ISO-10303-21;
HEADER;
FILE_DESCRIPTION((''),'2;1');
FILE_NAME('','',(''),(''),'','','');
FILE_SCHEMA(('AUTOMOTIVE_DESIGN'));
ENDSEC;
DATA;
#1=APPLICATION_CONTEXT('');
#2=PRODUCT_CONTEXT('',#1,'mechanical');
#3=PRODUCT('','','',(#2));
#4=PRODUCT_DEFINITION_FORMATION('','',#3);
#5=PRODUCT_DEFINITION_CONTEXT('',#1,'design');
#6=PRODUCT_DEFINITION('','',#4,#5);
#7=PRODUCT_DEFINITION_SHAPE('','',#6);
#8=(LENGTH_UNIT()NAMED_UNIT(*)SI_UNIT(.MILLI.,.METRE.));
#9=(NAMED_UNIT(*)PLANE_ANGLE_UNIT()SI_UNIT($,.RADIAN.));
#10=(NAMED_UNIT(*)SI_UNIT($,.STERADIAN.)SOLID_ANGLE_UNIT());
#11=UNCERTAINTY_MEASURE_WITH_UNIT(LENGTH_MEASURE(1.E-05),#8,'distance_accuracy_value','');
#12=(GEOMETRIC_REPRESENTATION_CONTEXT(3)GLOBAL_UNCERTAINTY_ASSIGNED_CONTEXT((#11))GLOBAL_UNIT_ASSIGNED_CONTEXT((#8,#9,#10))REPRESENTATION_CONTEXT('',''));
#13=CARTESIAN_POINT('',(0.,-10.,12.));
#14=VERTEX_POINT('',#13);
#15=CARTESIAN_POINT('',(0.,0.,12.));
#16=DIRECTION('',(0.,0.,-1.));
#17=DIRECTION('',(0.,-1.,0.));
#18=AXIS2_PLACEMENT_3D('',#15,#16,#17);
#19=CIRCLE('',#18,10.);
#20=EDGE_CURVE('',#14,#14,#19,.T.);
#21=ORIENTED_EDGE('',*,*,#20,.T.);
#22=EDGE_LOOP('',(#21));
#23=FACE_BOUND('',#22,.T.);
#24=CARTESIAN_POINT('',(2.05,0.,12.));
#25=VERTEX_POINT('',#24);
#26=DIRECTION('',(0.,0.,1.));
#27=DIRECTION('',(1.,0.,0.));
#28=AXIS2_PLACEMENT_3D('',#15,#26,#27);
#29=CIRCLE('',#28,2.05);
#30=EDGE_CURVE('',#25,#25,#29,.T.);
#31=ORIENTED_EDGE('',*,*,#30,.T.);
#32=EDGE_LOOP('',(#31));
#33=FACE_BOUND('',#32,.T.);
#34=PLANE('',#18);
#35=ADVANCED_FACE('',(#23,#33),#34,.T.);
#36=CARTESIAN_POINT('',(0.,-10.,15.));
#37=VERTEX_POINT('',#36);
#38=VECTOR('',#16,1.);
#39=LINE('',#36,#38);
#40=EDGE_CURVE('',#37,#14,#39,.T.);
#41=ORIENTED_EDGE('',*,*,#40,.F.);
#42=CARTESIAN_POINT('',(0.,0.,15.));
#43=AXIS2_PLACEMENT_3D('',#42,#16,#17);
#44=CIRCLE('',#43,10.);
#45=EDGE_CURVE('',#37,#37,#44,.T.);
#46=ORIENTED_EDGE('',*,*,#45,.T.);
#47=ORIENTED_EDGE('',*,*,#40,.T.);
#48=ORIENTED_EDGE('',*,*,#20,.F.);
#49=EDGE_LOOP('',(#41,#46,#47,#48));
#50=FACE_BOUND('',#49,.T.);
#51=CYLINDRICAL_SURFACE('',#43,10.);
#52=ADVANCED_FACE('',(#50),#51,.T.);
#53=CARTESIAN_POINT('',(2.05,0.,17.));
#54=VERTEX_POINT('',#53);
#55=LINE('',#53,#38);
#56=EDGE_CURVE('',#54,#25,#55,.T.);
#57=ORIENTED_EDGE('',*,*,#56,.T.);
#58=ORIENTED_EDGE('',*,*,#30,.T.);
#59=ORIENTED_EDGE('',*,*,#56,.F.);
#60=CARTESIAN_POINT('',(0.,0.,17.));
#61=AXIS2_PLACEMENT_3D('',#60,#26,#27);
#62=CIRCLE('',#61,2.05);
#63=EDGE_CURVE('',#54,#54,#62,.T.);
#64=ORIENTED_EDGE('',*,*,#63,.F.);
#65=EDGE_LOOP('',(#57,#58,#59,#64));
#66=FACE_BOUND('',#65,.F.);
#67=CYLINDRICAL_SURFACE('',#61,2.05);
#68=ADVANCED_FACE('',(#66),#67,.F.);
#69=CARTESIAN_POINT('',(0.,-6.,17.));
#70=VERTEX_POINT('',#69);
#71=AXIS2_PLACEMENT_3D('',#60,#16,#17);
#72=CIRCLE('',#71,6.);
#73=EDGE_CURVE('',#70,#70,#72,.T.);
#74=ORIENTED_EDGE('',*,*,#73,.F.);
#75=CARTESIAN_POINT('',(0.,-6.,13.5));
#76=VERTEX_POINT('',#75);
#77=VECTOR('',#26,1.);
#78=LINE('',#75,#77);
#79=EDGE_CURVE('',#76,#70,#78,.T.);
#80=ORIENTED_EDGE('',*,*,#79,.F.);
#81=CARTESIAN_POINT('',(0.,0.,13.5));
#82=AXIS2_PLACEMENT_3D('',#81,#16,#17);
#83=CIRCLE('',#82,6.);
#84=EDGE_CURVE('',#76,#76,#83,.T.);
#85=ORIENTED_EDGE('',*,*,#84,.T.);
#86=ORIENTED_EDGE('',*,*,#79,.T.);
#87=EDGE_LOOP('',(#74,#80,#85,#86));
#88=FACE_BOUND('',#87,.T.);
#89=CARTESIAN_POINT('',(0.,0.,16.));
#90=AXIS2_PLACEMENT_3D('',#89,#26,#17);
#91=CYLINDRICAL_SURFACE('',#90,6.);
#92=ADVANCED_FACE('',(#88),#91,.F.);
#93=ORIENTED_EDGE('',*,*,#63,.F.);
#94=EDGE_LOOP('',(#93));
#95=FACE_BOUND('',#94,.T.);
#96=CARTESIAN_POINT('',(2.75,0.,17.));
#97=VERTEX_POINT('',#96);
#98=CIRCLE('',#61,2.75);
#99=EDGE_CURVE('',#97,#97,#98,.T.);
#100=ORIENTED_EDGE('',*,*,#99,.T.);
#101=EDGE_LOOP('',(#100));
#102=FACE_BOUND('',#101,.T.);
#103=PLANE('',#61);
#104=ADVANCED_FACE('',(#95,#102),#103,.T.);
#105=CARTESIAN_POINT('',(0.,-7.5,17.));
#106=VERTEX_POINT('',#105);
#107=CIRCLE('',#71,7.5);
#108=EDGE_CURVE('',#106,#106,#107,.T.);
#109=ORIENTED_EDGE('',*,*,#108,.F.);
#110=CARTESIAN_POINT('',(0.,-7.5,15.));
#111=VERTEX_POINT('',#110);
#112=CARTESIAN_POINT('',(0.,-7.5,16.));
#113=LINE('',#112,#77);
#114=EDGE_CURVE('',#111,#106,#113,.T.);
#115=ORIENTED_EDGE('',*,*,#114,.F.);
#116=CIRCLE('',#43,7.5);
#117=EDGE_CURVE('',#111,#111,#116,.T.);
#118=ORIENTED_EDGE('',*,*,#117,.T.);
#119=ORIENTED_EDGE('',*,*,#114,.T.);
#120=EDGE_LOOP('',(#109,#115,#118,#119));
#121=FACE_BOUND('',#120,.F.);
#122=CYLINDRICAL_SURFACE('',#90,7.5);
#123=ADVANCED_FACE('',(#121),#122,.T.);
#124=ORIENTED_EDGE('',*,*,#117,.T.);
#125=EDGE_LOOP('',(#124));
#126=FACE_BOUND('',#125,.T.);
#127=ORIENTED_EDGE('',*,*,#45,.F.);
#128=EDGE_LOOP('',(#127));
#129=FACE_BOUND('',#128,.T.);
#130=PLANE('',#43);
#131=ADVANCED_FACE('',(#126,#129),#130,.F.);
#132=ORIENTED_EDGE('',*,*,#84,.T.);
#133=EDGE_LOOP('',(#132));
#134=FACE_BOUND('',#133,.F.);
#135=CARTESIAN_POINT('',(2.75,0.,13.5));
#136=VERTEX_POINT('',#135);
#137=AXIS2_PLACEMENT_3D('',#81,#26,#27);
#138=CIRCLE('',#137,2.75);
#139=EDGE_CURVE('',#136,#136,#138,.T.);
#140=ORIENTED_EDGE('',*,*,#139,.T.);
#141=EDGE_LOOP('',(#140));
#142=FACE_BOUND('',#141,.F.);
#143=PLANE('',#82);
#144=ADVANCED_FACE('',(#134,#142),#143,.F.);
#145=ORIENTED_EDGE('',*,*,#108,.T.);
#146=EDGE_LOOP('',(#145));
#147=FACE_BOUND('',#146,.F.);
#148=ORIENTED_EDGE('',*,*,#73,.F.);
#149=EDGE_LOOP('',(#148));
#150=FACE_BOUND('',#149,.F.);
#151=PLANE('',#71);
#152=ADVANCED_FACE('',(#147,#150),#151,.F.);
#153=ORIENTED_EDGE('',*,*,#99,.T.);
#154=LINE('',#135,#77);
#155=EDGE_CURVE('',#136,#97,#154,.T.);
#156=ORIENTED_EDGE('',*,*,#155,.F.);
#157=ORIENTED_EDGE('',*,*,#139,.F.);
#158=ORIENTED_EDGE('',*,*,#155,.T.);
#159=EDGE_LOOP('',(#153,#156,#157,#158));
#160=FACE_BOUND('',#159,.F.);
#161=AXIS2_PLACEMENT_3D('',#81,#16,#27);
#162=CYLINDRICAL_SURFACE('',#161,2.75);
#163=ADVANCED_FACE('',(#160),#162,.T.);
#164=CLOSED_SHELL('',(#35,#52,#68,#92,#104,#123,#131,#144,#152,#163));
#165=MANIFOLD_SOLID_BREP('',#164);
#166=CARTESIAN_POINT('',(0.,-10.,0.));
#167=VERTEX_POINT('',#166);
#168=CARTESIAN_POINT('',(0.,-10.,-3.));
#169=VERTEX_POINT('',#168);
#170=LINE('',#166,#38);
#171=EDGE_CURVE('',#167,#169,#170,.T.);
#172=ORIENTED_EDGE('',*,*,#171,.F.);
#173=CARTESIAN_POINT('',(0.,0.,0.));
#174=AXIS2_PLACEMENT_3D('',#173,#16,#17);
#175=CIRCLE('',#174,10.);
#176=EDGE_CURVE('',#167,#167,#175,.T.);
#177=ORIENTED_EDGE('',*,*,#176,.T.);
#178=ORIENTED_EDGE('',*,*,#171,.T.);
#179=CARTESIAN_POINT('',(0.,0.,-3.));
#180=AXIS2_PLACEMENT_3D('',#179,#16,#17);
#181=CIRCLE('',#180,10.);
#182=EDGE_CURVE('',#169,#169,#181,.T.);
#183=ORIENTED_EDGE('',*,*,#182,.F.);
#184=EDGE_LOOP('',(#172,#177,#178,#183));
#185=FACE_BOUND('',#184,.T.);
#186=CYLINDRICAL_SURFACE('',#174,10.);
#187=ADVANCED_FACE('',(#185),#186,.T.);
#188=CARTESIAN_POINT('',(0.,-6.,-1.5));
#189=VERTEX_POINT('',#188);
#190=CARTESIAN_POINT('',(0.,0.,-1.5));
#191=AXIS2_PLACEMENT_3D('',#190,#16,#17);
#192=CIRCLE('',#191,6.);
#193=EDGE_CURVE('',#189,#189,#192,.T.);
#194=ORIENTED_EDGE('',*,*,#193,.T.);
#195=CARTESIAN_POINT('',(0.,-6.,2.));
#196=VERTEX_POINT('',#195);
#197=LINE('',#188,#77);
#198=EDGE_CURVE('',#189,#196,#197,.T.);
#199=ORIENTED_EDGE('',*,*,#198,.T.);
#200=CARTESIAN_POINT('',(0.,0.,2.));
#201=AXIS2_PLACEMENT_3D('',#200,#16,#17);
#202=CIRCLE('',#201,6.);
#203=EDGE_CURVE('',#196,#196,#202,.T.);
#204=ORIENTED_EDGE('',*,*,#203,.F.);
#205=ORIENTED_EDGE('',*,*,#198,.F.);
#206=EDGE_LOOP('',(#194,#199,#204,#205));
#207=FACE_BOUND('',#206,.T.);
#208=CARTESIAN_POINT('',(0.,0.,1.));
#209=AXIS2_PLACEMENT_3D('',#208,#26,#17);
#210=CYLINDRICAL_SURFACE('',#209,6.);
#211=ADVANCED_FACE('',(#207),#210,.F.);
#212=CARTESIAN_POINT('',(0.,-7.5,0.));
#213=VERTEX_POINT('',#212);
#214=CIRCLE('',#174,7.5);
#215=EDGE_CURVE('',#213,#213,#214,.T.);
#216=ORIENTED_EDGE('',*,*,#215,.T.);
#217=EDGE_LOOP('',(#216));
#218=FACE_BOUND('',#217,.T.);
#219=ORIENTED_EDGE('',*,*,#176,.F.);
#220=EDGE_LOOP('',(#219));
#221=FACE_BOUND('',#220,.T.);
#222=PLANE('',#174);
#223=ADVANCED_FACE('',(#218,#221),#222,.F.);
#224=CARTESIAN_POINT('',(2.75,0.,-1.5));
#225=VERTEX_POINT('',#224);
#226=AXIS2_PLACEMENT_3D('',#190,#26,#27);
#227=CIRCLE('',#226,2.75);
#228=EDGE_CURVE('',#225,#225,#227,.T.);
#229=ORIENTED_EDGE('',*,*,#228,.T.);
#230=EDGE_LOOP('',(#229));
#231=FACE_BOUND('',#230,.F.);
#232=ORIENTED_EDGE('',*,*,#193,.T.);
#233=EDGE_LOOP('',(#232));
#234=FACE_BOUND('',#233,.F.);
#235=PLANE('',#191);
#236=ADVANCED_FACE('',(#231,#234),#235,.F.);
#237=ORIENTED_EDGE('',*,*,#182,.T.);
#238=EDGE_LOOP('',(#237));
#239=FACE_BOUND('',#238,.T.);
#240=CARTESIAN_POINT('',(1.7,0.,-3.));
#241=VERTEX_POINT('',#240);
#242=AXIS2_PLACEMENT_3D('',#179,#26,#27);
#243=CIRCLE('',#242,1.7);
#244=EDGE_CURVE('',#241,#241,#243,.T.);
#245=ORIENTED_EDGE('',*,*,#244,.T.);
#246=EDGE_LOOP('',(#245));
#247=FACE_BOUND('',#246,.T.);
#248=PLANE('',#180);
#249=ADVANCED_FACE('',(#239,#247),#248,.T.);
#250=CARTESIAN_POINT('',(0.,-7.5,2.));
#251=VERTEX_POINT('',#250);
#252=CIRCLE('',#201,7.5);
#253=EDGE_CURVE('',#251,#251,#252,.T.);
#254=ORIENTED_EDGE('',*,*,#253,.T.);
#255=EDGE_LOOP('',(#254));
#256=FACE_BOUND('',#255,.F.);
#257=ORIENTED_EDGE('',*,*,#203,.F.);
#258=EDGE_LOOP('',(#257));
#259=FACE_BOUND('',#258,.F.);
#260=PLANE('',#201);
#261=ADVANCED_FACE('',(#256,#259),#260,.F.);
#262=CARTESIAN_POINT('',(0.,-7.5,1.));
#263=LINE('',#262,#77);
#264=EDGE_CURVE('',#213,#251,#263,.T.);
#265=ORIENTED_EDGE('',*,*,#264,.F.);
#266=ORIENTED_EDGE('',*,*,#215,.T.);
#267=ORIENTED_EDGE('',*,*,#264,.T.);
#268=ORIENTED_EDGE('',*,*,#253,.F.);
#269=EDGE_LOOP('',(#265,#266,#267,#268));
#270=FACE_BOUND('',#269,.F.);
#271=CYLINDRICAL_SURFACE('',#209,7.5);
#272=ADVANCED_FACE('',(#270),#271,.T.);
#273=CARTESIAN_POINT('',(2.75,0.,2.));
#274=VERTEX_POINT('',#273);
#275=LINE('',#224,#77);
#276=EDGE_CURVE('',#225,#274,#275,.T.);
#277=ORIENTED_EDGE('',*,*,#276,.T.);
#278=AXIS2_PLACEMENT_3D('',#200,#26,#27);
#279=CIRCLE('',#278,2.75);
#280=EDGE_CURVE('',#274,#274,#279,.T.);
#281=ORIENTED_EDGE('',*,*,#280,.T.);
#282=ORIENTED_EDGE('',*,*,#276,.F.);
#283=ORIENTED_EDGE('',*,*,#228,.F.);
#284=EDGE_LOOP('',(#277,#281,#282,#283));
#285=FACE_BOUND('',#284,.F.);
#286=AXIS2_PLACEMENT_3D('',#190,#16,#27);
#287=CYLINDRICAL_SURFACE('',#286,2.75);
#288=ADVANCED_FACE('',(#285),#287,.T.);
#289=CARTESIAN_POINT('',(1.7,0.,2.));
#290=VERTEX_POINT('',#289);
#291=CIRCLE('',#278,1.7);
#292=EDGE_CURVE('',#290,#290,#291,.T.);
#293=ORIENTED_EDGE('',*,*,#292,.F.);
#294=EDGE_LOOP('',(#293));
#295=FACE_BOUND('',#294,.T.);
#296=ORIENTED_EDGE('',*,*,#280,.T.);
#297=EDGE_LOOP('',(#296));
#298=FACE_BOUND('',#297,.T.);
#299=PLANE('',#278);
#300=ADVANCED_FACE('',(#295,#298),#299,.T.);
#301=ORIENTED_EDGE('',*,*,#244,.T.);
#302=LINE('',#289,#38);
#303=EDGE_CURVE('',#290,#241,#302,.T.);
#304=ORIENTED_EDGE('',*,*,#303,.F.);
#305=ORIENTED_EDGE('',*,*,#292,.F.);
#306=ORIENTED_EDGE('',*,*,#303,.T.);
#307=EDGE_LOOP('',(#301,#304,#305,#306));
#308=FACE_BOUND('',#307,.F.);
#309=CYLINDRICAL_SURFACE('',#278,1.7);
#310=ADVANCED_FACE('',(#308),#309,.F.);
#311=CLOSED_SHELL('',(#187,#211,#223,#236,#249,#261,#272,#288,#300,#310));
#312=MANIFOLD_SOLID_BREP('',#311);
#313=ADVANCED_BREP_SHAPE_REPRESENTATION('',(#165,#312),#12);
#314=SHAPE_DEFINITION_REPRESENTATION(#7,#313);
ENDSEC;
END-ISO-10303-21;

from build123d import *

# Parameters (mm, degrees)
F0_W     = 7.5
F0_H     = 2
F2_T     = 1.5
F3_R     = 2.75
F4_DEPTH = 3.5
F5_R     = 1.7
F8_DEPTH = 5
F7_R     = 2.05
F9_DEPTH = 5


# Not quite as in the source:
# - a shell that OpenCascade refuses in one call is made with other operations: the cavity is built on its own and cut out


with BuildPart() as f1:
    # F0 (on Right) → F1 (revolve)
    with BuildSketch(Plane.YZ):
        with Locations((-3.75, 1)):
            Rectangle(F0_W, F0_H)
        Polygon((0, 0), (-7.5, 0), (-10, 0), (-10, -3), (0, -3), align=None)
    revolve(axis=Axis((0, 0, 1), (0, 0, -1)))

    # F2: shell of thickness 1.5, made by hand


with BuildPart() as f2_core1:
    # F2_t2: copy of F1
    add(f1.part)

    # the walls: a layer under each face that stays
    f2_faces = [f2_core1.faces().sort_by_distance(p)[0] for p in [
        (0, 7.5, 1),
        (6.6666666667, -6.6666666667, 0),
        (0, 10, -1.5),
        (0, 0, -3),
    ]]
    thicken(f2_faces, amount=-F2_T, mode=Mode.SUBTRACT)

    # F2_s3 → F2_t4 (revolve, cut)
    with BuildSketch(Plane.YZ):
        Polygon((-7.515, 0.015), (-6, 0), (-6, -1.5), (-7.5, -1.5), align=None)
    revolve(axis=Axis((0, 0, 0), (0, 0, -1)), mode=Mode.SUBTRACT)


with BuildPart() as f1_1:
    add(f1.part)

    # what is left inside the walls is the cavity
    f2_cavity = [f2_core1.part.solids().sort_by_distance(p)[0] for p in [
        (0, 5.985, 0.833333),
    ]]
    add(f2_cavity, mode=Mode.SUBTRACT)

    # F3 (on face) → F4 (join, through all)
    with BuildSketch(Plane.XY.offset(-1.5)):
        Circle(F3_R)
    extrude(amount=F4_DEPTH)


with BuildPart() as f6_1:
    # F6: copy of F1
    add(f1_1.part.moved(Location((0, 0, 15))))

    # F7 (on face) → F9 (cut, through all)
    with BuildSketch(Plane.XY.offset(17)):
        Circle(F7_R)
    extrude(amount=-F9_DEPTH, mode=Mode.SUBTRACT)


with BuildPart() as f1_2:
    add(f1_1.part)

    # F5 (on face) → F8 (cut, through all)
    with BuildSketch(Plane.XY.offset(2)):
        Circle(F5_R)
    extrude(amount=-F8_DEPTH, mode=Mode.SUBTRACT)


solid = Compound([f6_1.part, f1_2.part])
